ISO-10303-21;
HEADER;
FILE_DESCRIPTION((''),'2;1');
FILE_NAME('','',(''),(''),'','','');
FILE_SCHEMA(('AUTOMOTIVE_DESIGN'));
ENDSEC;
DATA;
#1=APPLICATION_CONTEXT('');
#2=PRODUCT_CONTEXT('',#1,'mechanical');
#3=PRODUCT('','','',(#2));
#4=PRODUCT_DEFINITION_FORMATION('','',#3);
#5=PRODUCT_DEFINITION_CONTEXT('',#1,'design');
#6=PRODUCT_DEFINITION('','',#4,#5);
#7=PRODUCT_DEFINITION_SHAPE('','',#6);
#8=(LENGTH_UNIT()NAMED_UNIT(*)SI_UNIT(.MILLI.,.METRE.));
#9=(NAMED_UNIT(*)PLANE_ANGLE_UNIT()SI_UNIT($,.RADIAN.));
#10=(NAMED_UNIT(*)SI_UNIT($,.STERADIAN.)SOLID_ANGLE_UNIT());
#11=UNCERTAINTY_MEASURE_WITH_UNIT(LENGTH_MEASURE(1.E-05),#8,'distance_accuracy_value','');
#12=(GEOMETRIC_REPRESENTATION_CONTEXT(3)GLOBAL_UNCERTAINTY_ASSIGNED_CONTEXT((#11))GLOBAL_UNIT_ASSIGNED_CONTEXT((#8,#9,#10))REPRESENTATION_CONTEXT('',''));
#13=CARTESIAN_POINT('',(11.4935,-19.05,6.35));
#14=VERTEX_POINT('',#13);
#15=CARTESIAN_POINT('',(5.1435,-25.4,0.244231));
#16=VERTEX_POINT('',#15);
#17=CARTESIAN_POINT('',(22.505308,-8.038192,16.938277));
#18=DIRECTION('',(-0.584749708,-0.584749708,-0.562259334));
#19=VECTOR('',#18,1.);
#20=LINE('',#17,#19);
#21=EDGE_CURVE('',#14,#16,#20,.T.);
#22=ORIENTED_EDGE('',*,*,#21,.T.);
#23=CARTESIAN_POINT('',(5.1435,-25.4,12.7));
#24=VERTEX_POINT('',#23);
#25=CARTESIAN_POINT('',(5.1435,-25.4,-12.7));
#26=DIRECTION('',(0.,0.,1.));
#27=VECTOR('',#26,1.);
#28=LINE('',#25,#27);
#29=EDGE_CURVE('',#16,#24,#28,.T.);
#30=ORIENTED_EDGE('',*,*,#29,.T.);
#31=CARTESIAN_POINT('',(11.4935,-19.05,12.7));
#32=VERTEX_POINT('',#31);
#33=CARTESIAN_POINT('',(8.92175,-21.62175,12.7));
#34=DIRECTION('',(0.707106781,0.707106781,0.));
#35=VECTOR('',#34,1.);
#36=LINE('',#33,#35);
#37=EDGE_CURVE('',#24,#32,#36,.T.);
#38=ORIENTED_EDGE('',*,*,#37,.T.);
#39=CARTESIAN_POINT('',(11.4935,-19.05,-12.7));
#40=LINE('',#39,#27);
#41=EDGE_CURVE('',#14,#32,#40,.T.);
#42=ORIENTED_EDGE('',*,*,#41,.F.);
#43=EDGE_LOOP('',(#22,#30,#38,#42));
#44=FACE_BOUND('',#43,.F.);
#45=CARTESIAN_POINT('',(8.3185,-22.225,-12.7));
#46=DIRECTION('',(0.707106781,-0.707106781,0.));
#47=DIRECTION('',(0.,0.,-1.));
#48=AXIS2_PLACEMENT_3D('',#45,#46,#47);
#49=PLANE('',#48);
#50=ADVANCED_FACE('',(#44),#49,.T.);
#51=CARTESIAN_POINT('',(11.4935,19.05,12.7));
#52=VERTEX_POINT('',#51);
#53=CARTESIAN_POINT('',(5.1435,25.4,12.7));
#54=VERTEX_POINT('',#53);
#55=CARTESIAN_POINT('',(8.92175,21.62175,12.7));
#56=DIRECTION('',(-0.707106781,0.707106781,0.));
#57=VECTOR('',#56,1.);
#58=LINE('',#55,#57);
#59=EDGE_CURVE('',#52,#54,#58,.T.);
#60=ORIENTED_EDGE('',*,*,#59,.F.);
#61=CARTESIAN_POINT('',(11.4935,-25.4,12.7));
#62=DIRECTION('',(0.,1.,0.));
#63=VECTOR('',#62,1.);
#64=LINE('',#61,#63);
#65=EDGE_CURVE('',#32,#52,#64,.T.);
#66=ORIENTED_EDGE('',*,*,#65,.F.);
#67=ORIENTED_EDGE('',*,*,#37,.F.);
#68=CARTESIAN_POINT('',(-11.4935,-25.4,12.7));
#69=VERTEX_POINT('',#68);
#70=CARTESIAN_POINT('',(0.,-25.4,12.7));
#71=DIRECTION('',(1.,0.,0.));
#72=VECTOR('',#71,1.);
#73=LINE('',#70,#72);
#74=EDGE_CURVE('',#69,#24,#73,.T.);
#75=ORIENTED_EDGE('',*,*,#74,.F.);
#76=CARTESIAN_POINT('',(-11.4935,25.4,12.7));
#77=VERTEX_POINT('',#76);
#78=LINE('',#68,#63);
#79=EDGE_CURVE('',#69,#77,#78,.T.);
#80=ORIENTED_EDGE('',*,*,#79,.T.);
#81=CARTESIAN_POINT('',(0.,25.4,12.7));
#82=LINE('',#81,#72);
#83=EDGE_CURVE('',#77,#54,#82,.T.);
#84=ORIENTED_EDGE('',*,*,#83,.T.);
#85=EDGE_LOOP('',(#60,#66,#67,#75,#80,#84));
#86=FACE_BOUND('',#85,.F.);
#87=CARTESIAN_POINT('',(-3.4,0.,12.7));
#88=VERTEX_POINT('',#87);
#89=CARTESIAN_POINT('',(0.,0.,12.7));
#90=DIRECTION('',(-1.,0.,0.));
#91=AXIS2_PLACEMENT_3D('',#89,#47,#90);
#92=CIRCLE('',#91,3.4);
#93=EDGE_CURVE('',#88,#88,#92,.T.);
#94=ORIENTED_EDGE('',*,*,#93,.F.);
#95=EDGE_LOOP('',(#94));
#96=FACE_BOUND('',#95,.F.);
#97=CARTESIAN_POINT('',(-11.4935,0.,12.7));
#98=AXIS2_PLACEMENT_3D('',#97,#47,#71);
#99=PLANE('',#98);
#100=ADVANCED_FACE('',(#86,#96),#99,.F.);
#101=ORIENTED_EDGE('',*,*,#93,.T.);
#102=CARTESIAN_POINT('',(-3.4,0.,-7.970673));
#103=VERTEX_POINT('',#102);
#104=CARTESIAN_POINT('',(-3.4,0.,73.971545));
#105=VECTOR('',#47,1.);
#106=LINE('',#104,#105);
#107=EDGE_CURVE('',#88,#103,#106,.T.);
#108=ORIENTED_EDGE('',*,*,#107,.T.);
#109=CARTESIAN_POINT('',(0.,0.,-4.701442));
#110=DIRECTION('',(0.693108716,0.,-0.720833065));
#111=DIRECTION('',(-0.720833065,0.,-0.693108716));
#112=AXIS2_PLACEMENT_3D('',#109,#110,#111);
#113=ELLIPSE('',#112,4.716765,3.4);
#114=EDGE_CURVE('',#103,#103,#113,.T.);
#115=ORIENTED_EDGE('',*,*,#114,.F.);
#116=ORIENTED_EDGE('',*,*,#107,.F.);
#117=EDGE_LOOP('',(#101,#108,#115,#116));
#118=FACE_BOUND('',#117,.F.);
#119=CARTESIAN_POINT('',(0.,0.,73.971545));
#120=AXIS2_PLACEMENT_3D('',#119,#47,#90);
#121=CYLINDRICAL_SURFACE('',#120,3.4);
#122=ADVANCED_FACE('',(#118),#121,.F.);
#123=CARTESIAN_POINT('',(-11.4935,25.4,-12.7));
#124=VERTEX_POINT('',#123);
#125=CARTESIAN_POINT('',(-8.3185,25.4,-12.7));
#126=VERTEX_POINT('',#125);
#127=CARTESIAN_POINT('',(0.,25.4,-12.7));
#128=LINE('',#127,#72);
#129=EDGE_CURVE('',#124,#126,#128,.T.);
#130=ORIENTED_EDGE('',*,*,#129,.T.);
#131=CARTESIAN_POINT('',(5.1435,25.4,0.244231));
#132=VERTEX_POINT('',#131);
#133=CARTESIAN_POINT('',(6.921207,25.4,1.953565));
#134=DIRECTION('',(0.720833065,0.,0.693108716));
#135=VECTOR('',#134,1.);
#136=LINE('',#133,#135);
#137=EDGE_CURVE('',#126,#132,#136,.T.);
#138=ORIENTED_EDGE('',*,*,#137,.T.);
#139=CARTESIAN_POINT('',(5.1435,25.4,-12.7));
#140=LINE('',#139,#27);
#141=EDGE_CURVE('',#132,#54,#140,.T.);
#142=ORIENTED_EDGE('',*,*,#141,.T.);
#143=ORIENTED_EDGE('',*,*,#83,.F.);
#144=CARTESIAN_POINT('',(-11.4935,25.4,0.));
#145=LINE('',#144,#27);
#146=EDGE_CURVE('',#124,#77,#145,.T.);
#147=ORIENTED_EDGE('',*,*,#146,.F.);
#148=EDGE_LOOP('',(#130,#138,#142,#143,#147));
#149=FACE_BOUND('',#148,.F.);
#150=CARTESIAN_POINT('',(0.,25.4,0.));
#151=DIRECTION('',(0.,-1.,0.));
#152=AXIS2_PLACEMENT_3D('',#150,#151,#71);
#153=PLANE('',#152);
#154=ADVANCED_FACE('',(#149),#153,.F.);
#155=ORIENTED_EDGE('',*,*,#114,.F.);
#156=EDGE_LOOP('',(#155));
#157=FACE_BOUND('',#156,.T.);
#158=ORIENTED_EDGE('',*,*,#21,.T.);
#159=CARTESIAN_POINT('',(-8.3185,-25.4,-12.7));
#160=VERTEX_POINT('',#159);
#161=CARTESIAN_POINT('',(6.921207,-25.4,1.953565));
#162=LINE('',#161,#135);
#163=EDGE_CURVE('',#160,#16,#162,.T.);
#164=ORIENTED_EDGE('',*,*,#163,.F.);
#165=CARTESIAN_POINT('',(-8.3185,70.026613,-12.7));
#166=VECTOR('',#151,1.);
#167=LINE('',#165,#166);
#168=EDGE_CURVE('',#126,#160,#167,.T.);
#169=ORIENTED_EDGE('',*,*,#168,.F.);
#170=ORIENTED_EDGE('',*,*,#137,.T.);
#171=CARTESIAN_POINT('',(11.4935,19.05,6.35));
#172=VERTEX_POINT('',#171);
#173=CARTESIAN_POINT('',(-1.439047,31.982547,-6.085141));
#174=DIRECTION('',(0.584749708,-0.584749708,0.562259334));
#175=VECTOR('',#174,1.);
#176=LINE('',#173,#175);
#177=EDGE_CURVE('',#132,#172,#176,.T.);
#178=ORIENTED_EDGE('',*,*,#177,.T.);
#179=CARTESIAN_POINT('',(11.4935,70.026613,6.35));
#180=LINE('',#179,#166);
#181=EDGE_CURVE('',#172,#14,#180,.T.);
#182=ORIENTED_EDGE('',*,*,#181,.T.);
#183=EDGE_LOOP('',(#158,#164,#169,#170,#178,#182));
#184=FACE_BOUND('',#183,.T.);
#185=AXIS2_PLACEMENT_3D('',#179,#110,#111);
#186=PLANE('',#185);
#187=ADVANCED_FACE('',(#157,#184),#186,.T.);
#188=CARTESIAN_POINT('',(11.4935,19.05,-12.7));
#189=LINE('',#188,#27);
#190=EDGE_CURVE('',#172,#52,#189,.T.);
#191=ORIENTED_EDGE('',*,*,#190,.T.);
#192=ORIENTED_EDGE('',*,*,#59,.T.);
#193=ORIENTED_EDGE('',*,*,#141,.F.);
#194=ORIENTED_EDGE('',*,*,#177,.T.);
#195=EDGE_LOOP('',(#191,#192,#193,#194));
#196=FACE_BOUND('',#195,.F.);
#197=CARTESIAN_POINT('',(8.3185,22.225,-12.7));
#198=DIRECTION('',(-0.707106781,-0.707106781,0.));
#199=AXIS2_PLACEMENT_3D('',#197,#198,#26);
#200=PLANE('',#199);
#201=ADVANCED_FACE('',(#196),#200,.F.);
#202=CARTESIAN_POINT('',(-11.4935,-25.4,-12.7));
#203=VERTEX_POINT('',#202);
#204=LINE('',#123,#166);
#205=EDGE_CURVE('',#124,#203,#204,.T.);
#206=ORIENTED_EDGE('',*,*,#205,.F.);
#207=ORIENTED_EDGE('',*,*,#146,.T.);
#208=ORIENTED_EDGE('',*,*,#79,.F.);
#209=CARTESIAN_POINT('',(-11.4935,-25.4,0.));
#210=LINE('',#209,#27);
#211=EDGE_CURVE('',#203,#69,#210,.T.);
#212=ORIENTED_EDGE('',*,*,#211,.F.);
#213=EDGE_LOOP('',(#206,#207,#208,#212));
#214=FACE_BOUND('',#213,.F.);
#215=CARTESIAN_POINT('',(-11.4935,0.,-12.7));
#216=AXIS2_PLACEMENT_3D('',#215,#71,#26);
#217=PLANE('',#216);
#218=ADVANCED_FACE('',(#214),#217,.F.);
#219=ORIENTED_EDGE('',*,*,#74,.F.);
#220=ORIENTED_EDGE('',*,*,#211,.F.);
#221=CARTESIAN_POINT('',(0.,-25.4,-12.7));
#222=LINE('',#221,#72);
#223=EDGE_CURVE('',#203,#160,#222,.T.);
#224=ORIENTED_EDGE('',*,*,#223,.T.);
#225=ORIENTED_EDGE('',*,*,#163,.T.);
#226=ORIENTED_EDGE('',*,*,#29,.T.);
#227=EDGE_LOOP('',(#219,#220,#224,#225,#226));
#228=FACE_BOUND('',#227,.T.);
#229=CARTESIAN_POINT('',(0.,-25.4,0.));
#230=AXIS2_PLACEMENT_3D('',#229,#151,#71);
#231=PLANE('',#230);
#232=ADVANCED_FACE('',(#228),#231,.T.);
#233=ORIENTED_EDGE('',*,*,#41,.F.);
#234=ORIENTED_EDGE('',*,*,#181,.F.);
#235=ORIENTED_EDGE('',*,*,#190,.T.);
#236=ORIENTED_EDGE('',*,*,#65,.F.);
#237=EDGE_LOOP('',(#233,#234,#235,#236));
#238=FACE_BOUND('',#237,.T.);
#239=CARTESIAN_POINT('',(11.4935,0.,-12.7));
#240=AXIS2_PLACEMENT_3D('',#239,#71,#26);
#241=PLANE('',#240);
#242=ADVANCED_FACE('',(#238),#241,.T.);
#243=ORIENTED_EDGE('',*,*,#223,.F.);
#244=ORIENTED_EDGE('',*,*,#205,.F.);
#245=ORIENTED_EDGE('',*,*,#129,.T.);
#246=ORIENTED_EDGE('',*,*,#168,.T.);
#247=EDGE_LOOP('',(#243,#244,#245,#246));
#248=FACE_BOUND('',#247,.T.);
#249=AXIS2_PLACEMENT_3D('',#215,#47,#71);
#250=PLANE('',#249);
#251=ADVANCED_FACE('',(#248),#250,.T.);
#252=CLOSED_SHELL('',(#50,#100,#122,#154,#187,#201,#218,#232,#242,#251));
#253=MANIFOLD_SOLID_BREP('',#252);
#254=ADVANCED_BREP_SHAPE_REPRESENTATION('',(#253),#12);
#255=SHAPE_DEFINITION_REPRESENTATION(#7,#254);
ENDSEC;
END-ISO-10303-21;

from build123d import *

# Parameters (mm, degrees)
F0_W        = 22.987
F0_H        = 25.4
F1_DEPTH    = 25.4
F3_D        = 6.8
F4_SIZE     = 6.35
F5_SIZE     = 6.35
F6_T1_DEPTH = 140.0532259942


# Not quite as in the source:
# - a fillet or chamfer that OpenCascade refuses, or shapes differently, is made with other operations: its cross-section is extruded or revolved along the edge and cut away or added


with BuildPart() as f1:
    # F0 (on Front) → F1 (new body, symmetric)
    with BuildSketch(Plane.XZ):
        Rectangle(F0_W, F0_H)
    extrude(amount=F1_DEPTH, both=True)

    # F3 (through all)
    with Locations(Plane.XY.offset(12.7)):
        with Locations((0, 0)):
            Hole(F3_D / 2)

    # F4
    f4_edges = [f1.edges().sort_by_distance(p)[0] for p in [
        (11.4935, -25.4, 0),
    ]]
    chamfer(f4_edges, length=F4_SIZE)

    # F5
    f5_edges = [f1.edges().sort_by_distance(p)[0] for p in [
        (11.4935, 25.4, 0),
    ]]
    chamfer(f5_edges, length=F5_SIZE)

    # F6: chamfer of 19.05 x 19.812 on 1 edges, made by hand

    # F6_s2 → F6_t1 (cut)
    with BuildSketch(Plane.XZ.offset(-70.0266129971)):
        Polygon((11.4935, 6.35), (-8.3185, -12.7), (11.4935, -12.7), align=None)
    extrude(amount=F6_T1_DEPTH, mode=Mode.SUBTRACT)


solid = f1.part
